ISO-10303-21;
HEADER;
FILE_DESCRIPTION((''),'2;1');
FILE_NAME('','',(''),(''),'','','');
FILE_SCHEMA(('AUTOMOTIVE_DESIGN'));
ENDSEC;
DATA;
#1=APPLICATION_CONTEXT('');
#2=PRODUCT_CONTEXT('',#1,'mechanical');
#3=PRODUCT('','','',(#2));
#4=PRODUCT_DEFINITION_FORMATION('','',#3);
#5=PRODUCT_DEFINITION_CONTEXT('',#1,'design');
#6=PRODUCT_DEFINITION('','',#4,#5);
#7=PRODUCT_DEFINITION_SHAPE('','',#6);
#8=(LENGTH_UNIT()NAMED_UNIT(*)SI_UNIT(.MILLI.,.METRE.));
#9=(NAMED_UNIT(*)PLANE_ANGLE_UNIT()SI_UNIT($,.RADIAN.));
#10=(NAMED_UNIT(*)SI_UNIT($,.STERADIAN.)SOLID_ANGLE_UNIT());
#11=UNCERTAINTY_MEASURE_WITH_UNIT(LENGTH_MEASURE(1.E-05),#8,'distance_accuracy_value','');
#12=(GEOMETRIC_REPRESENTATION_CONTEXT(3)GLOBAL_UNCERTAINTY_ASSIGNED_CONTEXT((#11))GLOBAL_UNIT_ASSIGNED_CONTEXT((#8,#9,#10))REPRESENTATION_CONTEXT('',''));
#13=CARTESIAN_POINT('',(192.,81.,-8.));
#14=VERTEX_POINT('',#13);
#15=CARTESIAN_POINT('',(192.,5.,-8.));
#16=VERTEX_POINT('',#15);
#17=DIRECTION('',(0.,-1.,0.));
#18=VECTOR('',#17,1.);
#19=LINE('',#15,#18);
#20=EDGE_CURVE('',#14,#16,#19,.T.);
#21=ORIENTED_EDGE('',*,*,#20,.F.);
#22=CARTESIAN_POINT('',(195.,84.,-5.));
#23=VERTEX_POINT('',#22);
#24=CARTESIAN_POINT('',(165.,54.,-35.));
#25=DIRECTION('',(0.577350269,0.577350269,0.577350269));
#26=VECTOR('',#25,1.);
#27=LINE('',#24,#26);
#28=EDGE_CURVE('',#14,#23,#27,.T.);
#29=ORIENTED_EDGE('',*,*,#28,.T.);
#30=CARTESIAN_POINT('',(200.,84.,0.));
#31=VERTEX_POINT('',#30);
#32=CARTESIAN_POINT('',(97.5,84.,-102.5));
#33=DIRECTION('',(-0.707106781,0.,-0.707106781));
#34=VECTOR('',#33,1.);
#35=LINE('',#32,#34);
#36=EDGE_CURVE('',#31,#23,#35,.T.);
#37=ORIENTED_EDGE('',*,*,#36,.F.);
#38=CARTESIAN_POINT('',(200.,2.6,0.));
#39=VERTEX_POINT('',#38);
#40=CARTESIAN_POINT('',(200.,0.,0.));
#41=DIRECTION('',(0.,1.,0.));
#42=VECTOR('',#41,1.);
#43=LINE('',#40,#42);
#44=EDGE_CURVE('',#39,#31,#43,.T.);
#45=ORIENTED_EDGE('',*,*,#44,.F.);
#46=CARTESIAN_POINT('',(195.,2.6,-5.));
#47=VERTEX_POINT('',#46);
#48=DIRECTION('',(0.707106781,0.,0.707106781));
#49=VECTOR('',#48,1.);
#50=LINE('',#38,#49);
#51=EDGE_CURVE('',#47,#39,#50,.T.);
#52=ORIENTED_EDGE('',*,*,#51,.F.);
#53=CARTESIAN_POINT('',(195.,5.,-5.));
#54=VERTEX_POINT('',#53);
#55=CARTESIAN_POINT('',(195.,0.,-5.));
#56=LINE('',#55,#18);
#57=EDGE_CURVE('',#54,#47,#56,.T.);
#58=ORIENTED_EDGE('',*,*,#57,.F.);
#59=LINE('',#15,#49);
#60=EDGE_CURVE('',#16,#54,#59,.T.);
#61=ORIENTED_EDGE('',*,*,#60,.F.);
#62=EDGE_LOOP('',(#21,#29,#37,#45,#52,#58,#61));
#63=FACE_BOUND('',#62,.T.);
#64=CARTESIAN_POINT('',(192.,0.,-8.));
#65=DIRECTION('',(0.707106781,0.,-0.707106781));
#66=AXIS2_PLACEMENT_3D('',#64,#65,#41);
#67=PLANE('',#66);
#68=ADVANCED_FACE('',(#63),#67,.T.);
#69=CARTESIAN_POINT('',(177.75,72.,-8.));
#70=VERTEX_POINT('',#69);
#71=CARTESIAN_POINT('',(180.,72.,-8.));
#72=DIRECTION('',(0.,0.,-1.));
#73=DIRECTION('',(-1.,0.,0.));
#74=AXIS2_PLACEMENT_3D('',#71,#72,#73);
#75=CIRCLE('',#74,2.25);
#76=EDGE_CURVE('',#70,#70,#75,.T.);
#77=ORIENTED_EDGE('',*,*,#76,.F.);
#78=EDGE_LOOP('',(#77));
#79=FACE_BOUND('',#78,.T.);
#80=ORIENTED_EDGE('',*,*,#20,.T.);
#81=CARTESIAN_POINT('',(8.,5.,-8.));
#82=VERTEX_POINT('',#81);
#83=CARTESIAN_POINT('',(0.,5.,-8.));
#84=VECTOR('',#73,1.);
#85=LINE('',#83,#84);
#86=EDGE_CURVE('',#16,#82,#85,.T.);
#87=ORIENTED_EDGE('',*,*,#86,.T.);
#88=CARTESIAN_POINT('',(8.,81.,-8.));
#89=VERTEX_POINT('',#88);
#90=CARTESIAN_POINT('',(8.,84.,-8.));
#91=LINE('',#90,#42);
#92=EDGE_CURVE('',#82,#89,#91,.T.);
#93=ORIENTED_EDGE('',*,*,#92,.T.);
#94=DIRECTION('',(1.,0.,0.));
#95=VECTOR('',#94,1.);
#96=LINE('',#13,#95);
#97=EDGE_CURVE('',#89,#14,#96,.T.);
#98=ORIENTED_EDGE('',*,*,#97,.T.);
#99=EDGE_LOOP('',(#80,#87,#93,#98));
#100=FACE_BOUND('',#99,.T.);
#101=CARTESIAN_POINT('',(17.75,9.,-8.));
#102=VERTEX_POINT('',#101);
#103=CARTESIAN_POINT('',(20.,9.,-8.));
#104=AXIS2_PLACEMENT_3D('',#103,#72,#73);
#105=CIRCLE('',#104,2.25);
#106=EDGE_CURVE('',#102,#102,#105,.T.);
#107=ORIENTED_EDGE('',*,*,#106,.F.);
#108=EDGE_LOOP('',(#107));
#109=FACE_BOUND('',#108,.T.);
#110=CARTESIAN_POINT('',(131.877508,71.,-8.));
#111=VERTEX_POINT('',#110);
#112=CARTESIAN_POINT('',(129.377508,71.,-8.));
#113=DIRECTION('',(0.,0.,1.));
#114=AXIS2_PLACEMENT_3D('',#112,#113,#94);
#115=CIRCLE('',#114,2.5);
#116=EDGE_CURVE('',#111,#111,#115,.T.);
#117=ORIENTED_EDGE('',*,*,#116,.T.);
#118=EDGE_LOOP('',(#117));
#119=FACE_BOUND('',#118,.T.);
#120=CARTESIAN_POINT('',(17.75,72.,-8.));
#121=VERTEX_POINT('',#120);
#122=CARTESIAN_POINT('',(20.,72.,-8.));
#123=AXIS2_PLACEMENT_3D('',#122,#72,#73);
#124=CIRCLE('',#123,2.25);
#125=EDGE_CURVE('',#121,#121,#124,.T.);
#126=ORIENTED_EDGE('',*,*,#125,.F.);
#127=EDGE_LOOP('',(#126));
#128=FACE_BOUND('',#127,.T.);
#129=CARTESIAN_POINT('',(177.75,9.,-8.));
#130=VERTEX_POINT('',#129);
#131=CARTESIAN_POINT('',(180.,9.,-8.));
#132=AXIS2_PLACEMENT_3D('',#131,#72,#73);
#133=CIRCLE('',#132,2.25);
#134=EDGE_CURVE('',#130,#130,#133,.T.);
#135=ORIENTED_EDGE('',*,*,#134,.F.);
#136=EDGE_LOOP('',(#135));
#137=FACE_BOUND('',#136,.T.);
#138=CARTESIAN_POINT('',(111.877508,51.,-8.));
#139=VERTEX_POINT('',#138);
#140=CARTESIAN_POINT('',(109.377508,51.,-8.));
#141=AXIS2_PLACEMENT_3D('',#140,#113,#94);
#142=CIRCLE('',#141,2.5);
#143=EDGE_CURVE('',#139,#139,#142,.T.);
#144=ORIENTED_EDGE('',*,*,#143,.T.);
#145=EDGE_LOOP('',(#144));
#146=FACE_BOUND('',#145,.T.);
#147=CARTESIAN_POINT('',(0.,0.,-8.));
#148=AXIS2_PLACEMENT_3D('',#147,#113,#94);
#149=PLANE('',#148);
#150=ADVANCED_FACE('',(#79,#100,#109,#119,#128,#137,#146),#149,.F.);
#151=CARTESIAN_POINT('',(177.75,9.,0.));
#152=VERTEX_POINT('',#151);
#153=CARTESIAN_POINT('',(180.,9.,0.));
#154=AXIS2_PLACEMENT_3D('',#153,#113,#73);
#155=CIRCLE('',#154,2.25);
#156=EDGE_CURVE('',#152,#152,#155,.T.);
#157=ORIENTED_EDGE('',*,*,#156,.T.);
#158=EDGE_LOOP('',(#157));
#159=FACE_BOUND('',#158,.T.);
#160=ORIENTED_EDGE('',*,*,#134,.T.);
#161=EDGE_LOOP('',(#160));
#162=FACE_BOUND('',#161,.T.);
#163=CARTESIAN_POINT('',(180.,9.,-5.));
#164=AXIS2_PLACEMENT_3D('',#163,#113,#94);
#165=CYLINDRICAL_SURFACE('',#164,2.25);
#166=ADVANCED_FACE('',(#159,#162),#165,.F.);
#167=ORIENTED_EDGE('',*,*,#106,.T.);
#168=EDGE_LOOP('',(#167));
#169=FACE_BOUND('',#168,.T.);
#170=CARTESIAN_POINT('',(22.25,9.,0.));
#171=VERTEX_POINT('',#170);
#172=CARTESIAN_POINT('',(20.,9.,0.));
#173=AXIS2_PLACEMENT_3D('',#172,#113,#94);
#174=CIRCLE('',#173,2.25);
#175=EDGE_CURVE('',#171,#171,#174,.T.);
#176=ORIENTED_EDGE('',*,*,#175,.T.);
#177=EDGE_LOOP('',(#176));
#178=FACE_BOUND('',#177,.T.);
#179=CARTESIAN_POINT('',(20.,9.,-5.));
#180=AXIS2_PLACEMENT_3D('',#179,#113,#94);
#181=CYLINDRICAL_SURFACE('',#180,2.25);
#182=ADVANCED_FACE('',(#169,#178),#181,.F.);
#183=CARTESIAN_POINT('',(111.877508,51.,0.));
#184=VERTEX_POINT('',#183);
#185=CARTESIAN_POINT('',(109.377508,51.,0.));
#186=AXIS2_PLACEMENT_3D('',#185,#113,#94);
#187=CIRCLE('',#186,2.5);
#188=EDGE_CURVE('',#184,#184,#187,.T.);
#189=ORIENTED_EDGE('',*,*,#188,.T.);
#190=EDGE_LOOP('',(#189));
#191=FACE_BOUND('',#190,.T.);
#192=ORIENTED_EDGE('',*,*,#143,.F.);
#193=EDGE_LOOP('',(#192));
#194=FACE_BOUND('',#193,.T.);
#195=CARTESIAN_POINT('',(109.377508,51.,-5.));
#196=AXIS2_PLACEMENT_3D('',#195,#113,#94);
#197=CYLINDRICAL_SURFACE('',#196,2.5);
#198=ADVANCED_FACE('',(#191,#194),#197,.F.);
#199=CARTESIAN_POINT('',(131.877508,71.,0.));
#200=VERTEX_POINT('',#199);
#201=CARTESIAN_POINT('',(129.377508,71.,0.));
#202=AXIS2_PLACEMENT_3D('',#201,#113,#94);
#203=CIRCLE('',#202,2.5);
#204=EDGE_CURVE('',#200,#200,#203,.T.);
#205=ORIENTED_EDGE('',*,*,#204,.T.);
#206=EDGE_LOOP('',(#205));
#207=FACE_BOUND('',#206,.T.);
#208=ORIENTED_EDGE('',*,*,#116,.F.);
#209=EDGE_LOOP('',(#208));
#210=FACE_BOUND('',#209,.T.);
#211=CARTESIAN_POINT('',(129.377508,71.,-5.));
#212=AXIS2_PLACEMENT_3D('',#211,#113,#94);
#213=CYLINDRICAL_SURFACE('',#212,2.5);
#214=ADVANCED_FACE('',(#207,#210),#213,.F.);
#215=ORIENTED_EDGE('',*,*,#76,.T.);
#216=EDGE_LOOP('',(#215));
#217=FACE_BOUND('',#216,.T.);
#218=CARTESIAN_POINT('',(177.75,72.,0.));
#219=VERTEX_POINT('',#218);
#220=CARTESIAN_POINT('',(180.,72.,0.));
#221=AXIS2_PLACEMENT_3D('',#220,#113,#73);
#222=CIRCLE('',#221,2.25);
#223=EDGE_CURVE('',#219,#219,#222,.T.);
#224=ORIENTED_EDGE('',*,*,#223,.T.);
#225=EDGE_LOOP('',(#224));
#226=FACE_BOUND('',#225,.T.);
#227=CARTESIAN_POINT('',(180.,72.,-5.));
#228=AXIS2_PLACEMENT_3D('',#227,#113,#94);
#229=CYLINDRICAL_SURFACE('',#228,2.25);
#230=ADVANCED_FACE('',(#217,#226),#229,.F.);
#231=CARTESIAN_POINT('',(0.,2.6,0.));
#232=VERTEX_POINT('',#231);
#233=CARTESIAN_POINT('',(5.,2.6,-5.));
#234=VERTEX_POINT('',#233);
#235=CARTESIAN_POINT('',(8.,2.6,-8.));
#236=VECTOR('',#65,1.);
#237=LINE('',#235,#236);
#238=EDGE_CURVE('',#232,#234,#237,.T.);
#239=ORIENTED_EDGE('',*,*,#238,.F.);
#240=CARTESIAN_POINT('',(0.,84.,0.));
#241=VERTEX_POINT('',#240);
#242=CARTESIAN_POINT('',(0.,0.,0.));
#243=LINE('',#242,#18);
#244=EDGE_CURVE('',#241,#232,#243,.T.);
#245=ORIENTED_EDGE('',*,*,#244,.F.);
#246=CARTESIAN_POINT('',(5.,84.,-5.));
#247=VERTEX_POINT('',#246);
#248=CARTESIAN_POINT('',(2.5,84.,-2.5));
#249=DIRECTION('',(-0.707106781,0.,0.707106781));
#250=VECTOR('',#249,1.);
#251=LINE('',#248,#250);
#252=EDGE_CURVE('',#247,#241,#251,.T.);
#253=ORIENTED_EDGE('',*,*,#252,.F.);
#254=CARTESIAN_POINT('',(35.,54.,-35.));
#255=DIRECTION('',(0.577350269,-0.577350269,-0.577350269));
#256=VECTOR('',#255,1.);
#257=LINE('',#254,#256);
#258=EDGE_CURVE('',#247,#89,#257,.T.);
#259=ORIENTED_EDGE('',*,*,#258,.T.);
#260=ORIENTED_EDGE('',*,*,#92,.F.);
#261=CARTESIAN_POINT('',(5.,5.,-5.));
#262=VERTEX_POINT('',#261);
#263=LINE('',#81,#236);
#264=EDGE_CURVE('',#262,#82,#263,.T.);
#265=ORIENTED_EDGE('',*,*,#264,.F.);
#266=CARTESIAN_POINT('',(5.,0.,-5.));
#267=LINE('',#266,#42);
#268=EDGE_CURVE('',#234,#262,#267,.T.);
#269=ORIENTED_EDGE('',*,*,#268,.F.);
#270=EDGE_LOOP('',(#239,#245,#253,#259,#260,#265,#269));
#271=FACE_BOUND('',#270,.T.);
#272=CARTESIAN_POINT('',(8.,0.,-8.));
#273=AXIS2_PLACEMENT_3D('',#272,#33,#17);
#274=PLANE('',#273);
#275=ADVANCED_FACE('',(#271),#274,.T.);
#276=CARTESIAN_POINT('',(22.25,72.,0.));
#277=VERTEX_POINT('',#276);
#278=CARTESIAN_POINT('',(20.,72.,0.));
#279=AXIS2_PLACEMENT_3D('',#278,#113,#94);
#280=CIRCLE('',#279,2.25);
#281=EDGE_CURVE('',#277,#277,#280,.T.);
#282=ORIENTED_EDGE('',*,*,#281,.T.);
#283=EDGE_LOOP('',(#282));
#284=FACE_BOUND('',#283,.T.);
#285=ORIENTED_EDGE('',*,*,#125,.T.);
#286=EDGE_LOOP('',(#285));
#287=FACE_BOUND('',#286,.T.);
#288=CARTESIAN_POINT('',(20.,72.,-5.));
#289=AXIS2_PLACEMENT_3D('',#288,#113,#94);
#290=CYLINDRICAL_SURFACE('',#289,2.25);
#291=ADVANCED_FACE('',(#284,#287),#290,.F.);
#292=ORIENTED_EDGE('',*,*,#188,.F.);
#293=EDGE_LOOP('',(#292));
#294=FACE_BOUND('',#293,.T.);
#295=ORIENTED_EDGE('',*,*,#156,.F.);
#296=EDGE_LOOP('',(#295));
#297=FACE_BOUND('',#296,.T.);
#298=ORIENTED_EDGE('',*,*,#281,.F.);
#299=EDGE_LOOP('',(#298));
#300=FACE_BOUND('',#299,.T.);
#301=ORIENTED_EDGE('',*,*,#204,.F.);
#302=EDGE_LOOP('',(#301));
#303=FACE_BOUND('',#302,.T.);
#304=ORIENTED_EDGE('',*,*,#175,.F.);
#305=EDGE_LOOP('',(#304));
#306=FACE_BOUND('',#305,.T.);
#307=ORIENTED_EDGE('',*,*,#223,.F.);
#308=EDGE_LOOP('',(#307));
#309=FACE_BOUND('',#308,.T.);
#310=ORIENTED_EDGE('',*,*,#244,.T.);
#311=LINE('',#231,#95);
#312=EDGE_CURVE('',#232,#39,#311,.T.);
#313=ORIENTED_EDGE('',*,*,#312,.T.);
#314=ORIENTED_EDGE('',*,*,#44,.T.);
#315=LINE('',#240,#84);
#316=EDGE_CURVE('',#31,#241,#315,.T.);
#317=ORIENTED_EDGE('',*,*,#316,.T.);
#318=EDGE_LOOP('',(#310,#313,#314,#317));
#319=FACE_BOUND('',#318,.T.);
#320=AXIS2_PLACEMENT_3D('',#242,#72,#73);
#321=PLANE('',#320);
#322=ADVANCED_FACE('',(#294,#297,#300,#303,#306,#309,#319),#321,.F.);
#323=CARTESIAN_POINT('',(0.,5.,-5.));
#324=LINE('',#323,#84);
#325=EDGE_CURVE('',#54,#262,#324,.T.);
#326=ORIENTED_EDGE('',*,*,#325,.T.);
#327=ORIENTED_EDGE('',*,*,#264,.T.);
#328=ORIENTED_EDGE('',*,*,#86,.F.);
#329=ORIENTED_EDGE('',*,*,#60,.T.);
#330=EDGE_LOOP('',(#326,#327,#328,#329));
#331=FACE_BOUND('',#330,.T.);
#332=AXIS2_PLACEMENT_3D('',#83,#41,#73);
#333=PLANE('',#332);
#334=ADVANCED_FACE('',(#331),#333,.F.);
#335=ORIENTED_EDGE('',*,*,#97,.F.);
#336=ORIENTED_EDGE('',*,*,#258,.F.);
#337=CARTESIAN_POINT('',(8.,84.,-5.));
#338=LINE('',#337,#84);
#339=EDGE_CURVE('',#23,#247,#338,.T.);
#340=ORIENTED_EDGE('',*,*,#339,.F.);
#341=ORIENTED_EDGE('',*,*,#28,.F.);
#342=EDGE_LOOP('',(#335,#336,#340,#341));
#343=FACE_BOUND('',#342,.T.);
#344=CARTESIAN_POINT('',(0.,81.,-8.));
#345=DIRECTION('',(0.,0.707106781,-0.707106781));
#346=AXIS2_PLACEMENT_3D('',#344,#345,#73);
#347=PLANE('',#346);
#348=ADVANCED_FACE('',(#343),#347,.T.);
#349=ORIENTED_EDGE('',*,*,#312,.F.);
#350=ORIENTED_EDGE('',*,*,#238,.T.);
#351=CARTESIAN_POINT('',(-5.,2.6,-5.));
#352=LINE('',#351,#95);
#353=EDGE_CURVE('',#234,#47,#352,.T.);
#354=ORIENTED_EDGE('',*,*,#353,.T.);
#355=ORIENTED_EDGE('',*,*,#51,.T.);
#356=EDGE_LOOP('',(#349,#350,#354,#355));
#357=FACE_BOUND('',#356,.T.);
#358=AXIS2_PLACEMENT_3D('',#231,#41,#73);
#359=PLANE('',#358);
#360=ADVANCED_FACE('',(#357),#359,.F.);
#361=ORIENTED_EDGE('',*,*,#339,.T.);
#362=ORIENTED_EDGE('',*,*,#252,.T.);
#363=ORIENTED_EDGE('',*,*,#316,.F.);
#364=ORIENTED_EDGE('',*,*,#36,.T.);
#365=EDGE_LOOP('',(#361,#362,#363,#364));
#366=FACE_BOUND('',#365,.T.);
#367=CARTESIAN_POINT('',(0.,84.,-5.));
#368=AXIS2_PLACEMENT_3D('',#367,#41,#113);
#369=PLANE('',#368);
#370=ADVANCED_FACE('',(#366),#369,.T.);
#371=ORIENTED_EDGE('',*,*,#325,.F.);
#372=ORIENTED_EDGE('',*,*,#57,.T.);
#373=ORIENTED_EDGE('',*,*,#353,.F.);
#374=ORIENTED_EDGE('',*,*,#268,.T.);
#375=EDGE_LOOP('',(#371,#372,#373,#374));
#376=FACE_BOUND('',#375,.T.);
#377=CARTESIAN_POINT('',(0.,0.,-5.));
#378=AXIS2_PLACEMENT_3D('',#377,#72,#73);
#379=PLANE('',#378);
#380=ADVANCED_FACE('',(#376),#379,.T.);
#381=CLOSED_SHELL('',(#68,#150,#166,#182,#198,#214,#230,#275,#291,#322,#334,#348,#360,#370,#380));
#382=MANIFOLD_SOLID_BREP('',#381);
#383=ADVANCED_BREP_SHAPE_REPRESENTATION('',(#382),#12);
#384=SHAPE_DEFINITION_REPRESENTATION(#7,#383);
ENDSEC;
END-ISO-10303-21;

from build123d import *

# Parameters (mm, degrees)
SKETCH1_W           = 200
SKETCH1_H           = 84
SKETCH1_R           = 2.25
SKETCH1_R_2         = 2.5
BOSS_EXTRUDE1_DEPTH = 5
SKETCH2_W           = 200
SKETCH2_H           = 79
SKETCH2_R           = 2.25
BOSS_EXTRUDE2_DEPTH = 3
CHAMFER1_SIZE       = 8
CHAMFER3_SIZE       = 3
SKETCH3_W           = 7.071067812
SKETCH3_H           = 2.6
CUT_EXTRUDE1_DEPTH  = 234.034075139
SKETCH4_R           = 2.5
CUT_EXTRUDE2_DEPTH  = 218.071416819


with BuildPart() as part:
    # Sketch1 → Boss-Extrude1 (new body)
    with BuildSketch(Plane.XY):
        with Locations((100, 42)):
            Rectangle(SKETCH1_W, SKETCH1_H)
        with Locations((20, 9)):
            Circle(SKETCH1_R, mode=Mode.SUBTRACT)
        with Locations(Location((180, 9, 0), (0, 0, 180))):
            Circle(SKETCH1_R, mode=Mode.SUBTRACT)
        with Locations((20, 72)):
            Circle(SKETCH1_R, mode=Mode.SUBTRACT)
        with Locations(Location((180, 72, 0), (0, 0, 180))):
            Circle(SKETCH1_R, mode=Mode.SUBTRACT)
        with Locations((109.377508284, 51)):
            Circle(SKETCH1_R_2, mode=Mode.SUBTRACT)
        with Locations((129.377508284, 71)):
            Circle(SKETCH1_R_2, mode=Mode.SUBTRACT)
    extrude(amount=-BOSS_EXTRUDE1_DEPTH)

    # Sketch2 → Boss-Extrude2 (add)
    with BuildSketch(Plane(origin=(0, 0, -5), x_dir=(-1, 0, 0), z_dir=(0, 0, -1))):
        with Locations((-100, 44.5)):
            Rectangle(SKETCH2_W, SKETCH2_H)
        with Locations(Location((-20, 9, 0), (0, 0, 180))):
            Circle(SKETCH2_R, mode=Mode.SUBTRACT)
        with Locations((-180, 9)):
            Circle(SKETCH2_R, mode=Mode.SUBTRACT)
        with Locations(Location((-20, 72, 0), (0, 0, 180))):
            Circle(SKETCH2_R, mode=Mode.SUBTRACT)
        with Locations((-180, 72)):
            Circle(SKETCH2_R, mode=Mode.SUBTRACT)
    extrude(amount=BOSS_EXTRUDE2_DEPTH)

    # Chamfer1
    # the kernel refuses this chamfer: 8 mm, written as the material it takes off along each edge
    with BuildSketch(Plane(origin=(200, -15.573463904, -8), x_dir=(-0.9996219169112968, 0, -0.027495876610586296), z_dir=(0, 1, 0)), Plane(origin=(0, 104.573463904, -8), x_dir=(0.9996219169112968, 0, -0.027495876610586275), z_dir=(0, -1, 0))) as chamfer1_piece_1:
        Polygon((CHAMFER1_SIZE * 0.999621916911, CHAMFER1_SIZE * 0.0274958766106), (-CHAMFER1_SIZE * 0.0274958766106, CHAMFER1_SIZE * 0.999621916911), (0, 0), align=None)
    extrude(amount=120.146927807, mode=Mode.SUBTRACT)

    # Chamfer3
    chamfer3_edges = [part.edges().sort_by_distance(p)[0] for p in [
        (100, 84, -8),
    ]]
    chamfer(chamfer3_edges, length=CHAMFER3_SIZE)

    # Sketch3 → Cut-Extrude1 (cut, through all, along a direction that is not the sketch's normal)
    with BuildSketch(Plane(origin=(100, 0, -100), x_dir=(-0.7071067811865452, 0, -0.7071067811865498), z_dir=(0.7071067811865498, 0, -0.7071067811865452))):
        with Locations((-137.885822331, 1.3)):
            Rectangle(SKETCH3_W, SKETCH3_H)
    extrude(amount=-CUT_EXTRUDE1_DEPTH, dir=(1, 0, 0), mode=Mode.SUBTRACT)

    # Sketch4 → Cut-Extrude2 (cut, through all)
    with BuildSketch(Plane.XY):
        with Locations((129.377508284, 71)):
            Circle(SKETCH4_R)
        with Locations((109.377508284, 51)):
            Circle(SKETCH4_R)
    extrude(amount=-CUT_EXTRUDE2_DEPTH, mode=Mode.SUBTRACT)


solid = part.part
